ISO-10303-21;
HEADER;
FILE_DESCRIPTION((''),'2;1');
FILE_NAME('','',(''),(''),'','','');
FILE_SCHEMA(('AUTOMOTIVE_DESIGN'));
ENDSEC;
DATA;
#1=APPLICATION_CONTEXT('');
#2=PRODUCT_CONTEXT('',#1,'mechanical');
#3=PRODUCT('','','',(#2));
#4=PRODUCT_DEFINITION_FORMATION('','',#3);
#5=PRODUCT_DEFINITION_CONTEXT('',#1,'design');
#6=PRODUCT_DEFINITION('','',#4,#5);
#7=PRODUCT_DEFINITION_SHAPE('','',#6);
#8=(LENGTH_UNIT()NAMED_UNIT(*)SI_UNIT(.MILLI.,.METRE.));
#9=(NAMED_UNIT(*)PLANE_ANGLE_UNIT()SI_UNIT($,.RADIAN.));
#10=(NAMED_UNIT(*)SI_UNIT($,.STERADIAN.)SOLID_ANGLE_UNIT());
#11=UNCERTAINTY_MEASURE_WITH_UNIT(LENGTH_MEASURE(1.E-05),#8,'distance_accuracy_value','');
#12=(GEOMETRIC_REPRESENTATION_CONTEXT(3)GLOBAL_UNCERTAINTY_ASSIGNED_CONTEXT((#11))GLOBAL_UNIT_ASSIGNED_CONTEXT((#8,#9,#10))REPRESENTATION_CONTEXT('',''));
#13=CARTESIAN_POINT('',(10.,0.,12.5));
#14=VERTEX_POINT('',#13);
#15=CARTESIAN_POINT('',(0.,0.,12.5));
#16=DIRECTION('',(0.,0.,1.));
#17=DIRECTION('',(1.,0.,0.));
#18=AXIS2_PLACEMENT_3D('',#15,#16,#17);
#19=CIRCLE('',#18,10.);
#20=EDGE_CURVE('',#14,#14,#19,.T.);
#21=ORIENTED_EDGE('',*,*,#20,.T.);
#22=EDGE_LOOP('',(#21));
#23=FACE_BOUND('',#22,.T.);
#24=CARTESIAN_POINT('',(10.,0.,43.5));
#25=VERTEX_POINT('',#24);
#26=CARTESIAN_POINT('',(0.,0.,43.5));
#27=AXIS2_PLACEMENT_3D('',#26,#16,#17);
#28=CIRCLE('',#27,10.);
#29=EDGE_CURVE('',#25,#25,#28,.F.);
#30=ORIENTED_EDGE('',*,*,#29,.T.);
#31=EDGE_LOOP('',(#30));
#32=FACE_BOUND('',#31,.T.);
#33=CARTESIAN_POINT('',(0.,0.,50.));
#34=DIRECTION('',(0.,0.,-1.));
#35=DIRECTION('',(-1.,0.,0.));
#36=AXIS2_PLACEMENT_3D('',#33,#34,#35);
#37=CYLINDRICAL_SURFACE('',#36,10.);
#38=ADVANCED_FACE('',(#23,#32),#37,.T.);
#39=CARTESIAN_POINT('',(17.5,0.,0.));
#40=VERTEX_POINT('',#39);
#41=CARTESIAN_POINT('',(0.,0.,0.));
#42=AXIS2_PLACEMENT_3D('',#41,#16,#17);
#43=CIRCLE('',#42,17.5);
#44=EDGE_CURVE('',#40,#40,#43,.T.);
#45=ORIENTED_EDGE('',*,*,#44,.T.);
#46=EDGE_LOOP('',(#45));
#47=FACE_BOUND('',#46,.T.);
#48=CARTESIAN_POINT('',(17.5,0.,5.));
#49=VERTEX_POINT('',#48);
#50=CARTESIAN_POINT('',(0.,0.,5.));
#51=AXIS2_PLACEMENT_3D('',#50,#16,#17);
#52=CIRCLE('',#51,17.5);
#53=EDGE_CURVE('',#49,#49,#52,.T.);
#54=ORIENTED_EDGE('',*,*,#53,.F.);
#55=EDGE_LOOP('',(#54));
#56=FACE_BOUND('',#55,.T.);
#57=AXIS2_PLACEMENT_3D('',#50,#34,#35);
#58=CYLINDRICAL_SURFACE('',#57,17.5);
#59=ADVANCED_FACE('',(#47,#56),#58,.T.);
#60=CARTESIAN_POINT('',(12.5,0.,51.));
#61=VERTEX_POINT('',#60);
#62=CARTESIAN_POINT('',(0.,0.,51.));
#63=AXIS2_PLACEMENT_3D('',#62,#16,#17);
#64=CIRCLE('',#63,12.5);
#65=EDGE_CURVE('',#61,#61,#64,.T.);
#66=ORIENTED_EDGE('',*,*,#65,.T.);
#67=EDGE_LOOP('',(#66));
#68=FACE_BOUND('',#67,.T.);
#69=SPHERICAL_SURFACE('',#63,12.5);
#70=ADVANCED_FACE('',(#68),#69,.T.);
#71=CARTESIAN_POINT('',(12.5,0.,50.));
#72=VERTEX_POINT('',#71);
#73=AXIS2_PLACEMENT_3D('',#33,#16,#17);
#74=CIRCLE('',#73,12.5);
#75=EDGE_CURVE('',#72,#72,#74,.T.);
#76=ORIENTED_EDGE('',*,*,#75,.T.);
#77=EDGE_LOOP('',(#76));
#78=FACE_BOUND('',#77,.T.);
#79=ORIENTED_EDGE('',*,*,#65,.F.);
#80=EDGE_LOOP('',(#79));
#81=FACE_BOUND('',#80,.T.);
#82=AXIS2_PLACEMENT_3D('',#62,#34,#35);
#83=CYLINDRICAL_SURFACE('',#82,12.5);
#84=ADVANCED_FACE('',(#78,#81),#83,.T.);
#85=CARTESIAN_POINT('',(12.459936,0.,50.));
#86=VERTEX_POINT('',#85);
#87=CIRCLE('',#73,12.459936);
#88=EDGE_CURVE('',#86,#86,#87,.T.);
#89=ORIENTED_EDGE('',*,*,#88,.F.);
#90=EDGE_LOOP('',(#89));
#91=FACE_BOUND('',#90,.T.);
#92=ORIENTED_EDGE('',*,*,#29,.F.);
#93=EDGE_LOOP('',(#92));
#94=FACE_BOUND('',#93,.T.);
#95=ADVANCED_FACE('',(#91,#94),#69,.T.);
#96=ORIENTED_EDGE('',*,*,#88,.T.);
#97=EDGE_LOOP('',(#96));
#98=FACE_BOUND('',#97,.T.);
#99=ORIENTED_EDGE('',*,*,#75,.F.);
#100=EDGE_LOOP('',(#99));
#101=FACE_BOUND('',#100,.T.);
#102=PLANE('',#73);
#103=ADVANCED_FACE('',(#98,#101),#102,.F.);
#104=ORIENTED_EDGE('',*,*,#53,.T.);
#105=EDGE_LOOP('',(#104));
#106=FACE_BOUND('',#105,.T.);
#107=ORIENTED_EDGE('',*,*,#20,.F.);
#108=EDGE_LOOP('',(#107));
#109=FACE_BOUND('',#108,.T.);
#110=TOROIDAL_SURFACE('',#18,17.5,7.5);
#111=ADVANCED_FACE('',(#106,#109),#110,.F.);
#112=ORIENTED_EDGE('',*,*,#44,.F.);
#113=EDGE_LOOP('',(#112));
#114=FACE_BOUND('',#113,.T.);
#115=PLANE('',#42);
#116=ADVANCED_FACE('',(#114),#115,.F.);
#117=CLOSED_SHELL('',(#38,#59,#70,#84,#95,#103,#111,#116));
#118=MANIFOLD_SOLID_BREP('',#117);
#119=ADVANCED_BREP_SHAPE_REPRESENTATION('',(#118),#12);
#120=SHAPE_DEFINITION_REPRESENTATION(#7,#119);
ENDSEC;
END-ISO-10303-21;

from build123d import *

# Parameters (mm, degrees)
SKETCH1_R           = 17.5
BOSS_EXTRUDE1_DEPTH = 5
SKETCH3_R           = 10
BOSS_EXTRUDE2_DEPTH = 50
SKETCH6_R           = 12.5
BOSS_EXTRUDE3_DEPTH = 1
FILLET1_R           = 7.5


with BuildPart() as part:
    # Sketch1 → Boss-Extrude1 (new body)
    with BuildSketch(Plane.XY):
        Circle(SKETCH1_R)
    extrude(amount=BOSS_EXTRUDE1_DEPTH)

    # Sketch3 → Boss-Extrude2 (add)
    with BuildSketch(Plane.XY):
        Circle(SKETCH3_R)
    extrude(amount=BOSS_EXTRUDE2_DEPTH)

    # Sketch6 → Boss-Extrude3 (add)
    with BuildSketch(Plane.XY.offset(50)):
        Circle(SKETCH6_R)
    extrude(amount=BOSS_EXTRUDE3_DEPTH)

    # Sketch7 → Revolve5 (revolve)
    with BuildSketch(Plane.XY.offset(51)):
        with BuildLine():
            Line((0, 12.5), (0, -12.5))
            ThreePointArc((0, -12.5), (-12.5, 0), (0, 12.5))
        make_face()
    revolve(axis=Axis((0, 12.5, 51), (0, -1, 0)))

    # Fillet1
    fillet1_edges = [part.edges().sort_by_distance(p)[0] for p in [
        (-10, 0, 5),
    ]]
    fillet(fillet1_edges, radius=FILLET1_R - 0.0001)  # a hair under: the kernel refuses the full size


solid = part.part
